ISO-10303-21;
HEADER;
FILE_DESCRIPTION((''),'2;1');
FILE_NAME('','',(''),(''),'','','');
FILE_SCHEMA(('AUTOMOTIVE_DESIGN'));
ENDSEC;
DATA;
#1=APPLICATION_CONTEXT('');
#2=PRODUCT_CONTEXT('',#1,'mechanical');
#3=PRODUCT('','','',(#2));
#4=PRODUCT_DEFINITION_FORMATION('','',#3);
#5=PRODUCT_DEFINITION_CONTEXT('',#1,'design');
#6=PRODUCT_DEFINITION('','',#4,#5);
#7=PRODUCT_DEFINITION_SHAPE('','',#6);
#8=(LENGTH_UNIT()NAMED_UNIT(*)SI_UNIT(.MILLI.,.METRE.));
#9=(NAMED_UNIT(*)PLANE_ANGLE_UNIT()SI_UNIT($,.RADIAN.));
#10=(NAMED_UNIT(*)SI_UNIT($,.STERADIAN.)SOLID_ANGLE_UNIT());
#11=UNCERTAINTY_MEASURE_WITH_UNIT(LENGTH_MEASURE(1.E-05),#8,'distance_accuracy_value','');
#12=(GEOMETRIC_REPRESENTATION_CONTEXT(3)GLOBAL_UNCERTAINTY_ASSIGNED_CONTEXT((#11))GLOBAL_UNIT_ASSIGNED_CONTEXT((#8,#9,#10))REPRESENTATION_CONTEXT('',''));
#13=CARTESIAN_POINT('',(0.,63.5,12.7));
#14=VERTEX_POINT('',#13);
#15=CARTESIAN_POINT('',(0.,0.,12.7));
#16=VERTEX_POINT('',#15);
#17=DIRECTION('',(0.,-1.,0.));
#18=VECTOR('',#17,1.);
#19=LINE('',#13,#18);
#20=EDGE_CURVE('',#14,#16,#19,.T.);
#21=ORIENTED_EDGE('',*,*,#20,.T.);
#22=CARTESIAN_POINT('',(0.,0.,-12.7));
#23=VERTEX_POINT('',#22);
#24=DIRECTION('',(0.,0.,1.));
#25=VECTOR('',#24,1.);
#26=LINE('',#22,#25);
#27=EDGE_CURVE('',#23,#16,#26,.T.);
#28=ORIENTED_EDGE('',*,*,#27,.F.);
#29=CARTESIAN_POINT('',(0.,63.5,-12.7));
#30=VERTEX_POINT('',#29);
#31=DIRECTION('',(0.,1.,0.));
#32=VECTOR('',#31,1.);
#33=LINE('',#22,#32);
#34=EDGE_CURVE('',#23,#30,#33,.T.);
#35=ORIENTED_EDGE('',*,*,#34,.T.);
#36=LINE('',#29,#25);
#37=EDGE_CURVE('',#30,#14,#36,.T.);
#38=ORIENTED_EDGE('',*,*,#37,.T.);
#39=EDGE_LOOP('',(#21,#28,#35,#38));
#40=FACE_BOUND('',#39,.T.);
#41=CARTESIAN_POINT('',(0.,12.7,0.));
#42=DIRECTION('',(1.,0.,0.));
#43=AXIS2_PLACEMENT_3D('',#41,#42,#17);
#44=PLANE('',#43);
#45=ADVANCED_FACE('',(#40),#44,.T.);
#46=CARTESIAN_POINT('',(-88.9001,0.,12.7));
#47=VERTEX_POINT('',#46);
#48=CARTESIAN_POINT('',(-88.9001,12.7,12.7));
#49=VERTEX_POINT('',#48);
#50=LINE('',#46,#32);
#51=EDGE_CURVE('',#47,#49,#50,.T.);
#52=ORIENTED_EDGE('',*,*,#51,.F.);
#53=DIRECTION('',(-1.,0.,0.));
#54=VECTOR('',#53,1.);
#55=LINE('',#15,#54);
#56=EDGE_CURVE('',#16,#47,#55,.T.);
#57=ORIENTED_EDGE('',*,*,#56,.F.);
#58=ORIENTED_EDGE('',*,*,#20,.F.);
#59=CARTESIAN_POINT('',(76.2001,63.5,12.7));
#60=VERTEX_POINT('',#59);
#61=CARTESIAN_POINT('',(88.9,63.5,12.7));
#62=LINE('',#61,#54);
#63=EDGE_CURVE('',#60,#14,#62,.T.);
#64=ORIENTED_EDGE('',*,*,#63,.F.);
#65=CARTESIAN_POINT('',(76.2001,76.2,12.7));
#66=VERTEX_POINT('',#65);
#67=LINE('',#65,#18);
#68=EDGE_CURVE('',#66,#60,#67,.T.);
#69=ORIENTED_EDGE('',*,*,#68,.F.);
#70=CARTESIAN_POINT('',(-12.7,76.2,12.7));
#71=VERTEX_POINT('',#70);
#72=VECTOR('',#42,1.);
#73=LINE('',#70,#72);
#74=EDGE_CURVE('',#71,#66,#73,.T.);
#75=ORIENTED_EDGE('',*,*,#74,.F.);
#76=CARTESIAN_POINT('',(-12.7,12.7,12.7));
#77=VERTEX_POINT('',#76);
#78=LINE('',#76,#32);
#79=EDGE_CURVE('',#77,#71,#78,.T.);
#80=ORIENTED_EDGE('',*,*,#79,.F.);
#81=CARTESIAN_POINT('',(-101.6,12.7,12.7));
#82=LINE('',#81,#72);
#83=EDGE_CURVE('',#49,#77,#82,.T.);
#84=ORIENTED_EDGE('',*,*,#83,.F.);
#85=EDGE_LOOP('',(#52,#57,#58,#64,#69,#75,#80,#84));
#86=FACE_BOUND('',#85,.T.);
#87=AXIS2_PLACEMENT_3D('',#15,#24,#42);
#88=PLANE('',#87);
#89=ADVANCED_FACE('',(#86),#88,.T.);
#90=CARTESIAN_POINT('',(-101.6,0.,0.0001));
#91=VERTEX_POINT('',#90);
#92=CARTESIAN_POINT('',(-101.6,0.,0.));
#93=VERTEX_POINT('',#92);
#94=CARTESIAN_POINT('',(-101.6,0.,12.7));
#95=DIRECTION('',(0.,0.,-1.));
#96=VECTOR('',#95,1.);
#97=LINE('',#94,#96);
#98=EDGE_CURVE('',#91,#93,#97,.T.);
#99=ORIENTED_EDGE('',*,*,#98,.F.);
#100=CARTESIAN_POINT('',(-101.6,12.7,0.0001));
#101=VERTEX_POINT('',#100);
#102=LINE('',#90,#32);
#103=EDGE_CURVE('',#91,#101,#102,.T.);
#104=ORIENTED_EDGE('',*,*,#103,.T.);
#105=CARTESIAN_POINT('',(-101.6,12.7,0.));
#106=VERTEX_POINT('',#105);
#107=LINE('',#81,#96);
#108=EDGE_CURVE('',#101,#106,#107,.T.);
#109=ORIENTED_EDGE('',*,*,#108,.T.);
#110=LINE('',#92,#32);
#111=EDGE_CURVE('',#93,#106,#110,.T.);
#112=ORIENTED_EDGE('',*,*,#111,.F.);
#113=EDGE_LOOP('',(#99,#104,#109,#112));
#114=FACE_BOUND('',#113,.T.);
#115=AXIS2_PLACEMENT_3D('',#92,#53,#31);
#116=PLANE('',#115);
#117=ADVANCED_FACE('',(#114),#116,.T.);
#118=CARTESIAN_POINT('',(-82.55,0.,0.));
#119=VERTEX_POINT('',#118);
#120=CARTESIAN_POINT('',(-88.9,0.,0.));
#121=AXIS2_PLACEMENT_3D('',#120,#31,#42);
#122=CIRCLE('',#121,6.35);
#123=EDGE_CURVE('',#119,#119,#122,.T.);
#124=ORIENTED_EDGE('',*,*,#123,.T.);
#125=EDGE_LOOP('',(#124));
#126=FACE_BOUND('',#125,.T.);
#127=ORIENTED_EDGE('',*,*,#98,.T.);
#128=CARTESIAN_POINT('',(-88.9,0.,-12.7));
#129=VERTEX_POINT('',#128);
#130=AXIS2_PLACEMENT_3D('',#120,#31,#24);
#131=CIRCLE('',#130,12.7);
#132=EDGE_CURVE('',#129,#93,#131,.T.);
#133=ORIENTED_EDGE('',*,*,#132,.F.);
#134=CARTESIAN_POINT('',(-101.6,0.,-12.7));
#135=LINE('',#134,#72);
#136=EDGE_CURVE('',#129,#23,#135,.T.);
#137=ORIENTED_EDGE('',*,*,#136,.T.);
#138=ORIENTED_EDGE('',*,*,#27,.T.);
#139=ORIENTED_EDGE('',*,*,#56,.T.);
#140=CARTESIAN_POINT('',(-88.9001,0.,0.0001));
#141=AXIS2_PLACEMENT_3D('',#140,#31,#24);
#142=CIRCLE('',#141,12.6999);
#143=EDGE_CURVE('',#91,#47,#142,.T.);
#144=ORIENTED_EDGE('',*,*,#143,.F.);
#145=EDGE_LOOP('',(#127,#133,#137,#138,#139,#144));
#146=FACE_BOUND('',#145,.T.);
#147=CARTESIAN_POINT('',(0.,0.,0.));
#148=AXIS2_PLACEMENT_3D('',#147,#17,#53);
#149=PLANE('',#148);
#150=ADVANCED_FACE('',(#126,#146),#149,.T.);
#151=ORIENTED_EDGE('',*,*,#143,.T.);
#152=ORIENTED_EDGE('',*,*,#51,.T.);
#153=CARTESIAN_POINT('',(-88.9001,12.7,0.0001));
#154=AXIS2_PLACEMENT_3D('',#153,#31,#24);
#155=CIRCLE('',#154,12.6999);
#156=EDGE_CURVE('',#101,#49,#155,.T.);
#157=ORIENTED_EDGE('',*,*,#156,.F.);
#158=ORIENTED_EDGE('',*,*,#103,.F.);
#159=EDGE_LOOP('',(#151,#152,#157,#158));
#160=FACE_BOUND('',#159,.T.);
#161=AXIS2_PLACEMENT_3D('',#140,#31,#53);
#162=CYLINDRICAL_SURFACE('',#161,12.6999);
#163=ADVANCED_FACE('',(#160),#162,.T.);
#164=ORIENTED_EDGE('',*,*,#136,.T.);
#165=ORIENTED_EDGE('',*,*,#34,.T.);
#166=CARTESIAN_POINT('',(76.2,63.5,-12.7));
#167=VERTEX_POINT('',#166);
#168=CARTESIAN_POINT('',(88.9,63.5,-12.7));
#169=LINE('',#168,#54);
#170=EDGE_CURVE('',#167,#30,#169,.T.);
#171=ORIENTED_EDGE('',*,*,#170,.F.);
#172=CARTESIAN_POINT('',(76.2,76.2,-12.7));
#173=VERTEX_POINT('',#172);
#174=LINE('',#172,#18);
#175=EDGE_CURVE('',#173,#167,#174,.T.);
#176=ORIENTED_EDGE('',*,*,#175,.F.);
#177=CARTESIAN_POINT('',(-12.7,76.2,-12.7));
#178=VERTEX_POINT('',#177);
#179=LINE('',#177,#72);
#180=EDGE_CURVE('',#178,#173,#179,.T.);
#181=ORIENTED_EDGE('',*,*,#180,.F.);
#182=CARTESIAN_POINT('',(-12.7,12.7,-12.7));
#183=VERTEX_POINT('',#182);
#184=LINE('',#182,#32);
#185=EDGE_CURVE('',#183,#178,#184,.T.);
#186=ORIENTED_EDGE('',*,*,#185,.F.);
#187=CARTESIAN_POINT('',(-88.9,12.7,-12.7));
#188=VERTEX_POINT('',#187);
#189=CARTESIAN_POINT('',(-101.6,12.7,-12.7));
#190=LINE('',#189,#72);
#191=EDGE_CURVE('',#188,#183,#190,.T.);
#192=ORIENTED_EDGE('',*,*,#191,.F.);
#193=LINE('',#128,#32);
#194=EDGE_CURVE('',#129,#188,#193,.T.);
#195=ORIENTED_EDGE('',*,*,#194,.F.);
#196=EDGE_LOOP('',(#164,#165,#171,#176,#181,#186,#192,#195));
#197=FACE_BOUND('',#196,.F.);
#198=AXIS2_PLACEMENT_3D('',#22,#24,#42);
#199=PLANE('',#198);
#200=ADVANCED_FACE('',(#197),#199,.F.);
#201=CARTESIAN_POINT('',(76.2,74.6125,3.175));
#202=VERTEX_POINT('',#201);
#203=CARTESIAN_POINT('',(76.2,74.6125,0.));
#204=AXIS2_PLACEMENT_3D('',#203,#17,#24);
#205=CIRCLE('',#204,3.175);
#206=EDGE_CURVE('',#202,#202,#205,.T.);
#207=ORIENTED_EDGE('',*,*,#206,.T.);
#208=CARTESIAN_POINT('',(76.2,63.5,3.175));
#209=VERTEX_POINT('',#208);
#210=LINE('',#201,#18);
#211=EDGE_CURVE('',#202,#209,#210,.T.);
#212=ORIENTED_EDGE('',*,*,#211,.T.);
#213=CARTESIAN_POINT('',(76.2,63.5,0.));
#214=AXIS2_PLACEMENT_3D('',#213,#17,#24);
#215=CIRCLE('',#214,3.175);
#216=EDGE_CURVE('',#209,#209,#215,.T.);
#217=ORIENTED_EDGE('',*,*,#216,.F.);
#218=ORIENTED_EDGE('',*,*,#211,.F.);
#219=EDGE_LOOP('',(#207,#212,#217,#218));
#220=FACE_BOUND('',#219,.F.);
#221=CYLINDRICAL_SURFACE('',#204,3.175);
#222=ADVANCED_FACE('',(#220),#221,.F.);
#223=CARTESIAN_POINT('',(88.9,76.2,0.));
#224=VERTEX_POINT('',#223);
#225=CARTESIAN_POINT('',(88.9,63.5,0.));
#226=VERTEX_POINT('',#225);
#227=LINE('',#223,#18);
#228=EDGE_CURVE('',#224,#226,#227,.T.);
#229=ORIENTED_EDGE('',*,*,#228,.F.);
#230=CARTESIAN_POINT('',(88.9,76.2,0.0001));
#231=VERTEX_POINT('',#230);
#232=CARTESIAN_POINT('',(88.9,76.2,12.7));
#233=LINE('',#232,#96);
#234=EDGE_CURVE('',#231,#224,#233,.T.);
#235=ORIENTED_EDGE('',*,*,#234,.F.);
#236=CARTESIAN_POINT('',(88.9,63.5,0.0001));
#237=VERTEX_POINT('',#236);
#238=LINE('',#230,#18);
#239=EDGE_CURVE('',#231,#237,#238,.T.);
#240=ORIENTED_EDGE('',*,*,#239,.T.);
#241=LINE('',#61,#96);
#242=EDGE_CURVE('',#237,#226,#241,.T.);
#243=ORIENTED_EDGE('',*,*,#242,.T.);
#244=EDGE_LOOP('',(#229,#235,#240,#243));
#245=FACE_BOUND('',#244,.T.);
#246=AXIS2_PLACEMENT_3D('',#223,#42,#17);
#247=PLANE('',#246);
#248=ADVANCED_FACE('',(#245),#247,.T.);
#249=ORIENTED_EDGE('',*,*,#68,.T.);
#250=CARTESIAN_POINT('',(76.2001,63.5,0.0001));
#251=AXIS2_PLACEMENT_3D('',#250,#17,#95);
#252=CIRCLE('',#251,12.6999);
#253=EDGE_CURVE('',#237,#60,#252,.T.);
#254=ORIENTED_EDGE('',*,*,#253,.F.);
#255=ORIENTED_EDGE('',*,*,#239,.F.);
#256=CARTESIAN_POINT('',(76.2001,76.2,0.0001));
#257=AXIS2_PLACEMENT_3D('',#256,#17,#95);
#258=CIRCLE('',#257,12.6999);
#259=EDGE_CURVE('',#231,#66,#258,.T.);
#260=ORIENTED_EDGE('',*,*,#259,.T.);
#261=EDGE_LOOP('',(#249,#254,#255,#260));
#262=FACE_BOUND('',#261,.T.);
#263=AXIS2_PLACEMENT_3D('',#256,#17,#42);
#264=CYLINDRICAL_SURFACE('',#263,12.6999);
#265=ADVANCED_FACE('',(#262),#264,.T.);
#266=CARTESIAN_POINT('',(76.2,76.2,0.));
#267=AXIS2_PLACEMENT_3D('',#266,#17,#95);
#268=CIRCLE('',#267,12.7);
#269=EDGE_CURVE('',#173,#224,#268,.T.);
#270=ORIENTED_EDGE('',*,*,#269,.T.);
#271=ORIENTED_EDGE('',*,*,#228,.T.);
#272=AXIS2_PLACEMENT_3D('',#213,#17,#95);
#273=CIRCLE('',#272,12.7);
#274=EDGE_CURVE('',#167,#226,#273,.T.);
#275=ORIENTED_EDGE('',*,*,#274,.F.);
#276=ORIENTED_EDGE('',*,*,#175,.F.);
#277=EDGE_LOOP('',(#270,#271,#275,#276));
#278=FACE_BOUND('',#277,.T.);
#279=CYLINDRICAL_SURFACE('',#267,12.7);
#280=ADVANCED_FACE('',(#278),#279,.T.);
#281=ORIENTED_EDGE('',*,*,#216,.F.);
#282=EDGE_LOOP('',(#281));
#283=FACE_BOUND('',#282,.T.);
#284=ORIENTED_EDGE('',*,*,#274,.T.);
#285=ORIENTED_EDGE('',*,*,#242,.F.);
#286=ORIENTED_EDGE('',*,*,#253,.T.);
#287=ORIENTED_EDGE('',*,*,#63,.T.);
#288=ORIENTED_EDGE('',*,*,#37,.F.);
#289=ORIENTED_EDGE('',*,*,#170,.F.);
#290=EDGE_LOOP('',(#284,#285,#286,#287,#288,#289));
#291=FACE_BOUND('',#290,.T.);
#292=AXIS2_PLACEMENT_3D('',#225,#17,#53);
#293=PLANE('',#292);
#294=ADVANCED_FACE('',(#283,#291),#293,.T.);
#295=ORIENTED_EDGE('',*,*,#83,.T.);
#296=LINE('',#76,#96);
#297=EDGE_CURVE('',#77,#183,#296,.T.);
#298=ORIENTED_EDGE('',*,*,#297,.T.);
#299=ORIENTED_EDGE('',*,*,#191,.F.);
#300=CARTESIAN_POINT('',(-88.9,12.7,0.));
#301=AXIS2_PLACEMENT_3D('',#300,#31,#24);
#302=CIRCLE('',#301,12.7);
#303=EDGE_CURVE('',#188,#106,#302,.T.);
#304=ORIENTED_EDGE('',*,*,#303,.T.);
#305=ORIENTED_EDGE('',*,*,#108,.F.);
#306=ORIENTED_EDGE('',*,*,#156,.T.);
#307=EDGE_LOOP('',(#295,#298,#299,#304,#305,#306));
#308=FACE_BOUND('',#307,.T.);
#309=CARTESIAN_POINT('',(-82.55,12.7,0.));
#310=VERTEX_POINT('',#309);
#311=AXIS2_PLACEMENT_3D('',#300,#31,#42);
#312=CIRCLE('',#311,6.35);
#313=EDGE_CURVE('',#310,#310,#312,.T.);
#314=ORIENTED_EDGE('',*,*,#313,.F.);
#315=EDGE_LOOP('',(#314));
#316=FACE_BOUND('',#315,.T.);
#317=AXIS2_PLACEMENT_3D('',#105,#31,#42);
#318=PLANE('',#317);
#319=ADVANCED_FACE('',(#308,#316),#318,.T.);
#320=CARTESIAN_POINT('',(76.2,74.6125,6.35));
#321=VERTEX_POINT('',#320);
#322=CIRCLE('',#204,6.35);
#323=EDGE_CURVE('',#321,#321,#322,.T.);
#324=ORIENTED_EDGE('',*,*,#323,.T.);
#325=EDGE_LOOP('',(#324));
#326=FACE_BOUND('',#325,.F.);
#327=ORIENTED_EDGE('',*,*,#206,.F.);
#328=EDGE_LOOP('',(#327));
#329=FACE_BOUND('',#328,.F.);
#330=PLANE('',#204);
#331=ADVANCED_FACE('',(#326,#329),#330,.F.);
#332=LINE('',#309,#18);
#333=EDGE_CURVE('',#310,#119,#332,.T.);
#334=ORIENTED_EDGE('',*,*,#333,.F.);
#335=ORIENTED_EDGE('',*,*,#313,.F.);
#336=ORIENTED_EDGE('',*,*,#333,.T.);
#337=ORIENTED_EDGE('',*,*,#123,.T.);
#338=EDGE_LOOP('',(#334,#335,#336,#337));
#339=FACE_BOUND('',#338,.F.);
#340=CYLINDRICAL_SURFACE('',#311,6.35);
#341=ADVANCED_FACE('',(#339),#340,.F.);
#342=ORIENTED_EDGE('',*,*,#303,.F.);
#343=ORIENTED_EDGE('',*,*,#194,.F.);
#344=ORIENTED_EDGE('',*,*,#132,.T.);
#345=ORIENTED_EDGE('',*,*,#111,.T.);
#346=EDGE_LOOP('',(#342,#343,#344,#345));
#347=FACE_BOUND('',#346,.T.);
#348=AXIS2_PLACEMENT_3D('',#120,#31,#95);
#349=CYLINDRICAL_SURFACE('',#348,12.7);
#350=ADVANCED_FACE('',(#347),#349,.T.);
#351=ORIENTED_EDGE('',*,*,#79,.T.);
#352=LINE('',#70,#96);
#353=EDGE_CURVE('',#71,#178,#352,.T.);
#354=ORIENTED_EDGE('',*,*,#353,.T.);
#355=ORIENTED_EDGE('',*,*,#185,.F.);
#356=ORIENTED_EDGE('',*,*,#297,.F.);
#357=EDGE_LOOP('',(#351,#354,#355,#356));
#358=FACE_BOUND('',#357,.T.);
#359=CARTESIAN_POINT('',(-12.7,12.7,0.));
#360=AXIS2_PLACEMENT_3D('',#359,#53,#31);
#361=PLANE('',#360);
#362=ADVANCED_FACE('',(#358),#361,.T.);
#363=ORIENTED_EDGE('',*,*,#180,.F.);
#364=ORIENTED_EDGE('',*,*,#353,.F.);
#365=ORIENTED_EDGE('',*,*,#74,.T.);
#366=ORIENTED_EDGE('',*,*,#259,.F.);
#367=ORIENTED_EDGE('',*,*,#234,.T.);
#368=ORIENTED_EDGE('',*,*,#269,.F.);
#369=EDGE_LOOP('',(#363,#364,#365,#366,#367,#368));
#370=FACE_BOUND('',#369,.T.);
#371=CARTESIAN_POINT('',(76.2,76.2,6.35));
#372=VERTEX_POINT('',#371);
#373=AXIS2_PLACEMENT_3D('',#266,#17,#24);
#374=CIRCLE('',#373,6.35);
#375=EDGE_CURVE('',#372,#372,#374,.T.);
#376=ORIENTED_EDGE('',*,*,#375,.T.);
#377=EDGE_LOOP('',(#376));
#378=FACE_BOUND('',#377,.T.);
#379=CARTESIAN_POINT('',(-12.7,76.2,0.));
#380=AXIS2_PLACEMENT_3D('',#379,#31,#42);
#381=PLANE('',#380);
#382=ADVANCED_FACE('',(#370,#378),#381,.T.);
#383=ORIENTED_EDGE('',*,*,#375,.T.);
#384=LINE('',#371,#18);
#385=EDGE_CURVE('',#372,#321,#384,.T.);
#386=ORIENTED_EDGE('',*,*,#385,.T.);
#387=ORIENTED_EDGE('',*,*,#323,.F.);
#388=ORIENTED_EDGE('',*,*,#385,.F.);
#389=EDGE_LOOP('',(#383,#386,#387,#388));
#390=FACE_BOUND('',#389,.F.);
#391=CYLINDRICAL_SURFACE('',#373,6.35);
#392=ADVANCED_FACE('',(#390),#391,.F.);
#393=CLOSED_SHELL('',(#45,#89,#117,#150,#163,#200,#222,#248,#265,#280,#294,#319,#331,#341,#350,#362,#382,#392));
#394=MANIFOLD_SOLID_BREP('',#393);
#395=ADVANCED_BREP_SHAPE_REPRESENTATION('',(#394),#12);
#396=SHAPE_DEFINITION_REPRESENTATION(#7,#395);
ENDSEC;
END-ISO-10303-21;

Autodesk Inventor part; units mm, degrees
ref_plane "YZ Plane" through (0, 0, 0) normal (1, 0, 0) x (0, 1, 0)
ref_plane "XZ Plane" through (0, 0, 0) normal (0, 1, 0) x (-1, 0, 0)
ref_plane "XY Plane" through (0, 0, 0) normal (0, 0, 1) x (1, 0, 0)
sketch "Sketch1" plane through (0, 0, 0) normal (0, 0, 1) x (1, 0, 0)
  line L0 (0, 0) -> (-101.6, 0)
  line L1 (-101.6, 0) -> (-101.6, 12.7)
  line L2 (-101.6, 12.7) -> (-12.7, 12.7)
  line L3 (0, 12.7) -> (0, 0)
  line L4 (0, 0) -> (-12.7, 0)
  line L5 (-12.7, 12.7) -> (-12.7, 76.2)
  line L6 (-12.7, 76.2) -> (88.9, 76.2)
  line L7 (88.9, 76.2) -> (88.9, 63.5)
  line L8 (88.9, 63.5) -> (0, 63.5)
  line L9 (0, 63.5) -> (0, 12.7)
  dimension "d0" = 101.6
  dimension "d4" = 12.7
  dimension "d5" = 12.7
  dimension "d6" = 12.7
  dimension "d7" = 76.2
  dimension "d8" = 101.6
  dimension "d9" = 12.7
  dimension "d10" = 88.9
extrude "Extrusion1" add sketch "Sketch1" along normal mid plane 25.4
fillet "Fillet1" radius 12.7 1 edges at (88.9, 69.85, -12.7)
fillet "Fillet2" radius 12.7 1 edges at (88.9, 69.85, 12.7)
fillet "Fillet3" radius 12.7 1 edges at (-101.6, 6.35, -12.7)
fillet "Fillet4" radius 12.7 1 edges at (-101.6, 6.35, 12.7)
sketch "Sketch2" plane through (-12.7, 12.7, 12.7) normal (0, 1, 0) x (1, 0, 0)
  arc A0 (-76.2, 25.4) -> (-76.2, 0) centre (-76.2, 12.7) ccw projected
  circle A1 centre (-76.2, 12.7) radius 6.35
  point P0 (12.7, 12.7)
  dimension "d17" = 12.7
extrude "Extrusion2" cut sketch "Sketch2" against normal blind 25.4
sketch "Sketch3" plane through (-12.7, 76.2, 12.7) normal (0, 1, 0) x (1, 0, 0)
  arc A0 (88.9, 0) -> (88.9, 25.4) centre (88.9, 12.7) ccw projected
  point P0 (12.7, 12.7)
hole "Hole1" at (76.2, 76.2, 0) direction (0, -1, 0) diameter 6.35 end through all counterbore diameter 12.7 counterbore depth 1.5875
